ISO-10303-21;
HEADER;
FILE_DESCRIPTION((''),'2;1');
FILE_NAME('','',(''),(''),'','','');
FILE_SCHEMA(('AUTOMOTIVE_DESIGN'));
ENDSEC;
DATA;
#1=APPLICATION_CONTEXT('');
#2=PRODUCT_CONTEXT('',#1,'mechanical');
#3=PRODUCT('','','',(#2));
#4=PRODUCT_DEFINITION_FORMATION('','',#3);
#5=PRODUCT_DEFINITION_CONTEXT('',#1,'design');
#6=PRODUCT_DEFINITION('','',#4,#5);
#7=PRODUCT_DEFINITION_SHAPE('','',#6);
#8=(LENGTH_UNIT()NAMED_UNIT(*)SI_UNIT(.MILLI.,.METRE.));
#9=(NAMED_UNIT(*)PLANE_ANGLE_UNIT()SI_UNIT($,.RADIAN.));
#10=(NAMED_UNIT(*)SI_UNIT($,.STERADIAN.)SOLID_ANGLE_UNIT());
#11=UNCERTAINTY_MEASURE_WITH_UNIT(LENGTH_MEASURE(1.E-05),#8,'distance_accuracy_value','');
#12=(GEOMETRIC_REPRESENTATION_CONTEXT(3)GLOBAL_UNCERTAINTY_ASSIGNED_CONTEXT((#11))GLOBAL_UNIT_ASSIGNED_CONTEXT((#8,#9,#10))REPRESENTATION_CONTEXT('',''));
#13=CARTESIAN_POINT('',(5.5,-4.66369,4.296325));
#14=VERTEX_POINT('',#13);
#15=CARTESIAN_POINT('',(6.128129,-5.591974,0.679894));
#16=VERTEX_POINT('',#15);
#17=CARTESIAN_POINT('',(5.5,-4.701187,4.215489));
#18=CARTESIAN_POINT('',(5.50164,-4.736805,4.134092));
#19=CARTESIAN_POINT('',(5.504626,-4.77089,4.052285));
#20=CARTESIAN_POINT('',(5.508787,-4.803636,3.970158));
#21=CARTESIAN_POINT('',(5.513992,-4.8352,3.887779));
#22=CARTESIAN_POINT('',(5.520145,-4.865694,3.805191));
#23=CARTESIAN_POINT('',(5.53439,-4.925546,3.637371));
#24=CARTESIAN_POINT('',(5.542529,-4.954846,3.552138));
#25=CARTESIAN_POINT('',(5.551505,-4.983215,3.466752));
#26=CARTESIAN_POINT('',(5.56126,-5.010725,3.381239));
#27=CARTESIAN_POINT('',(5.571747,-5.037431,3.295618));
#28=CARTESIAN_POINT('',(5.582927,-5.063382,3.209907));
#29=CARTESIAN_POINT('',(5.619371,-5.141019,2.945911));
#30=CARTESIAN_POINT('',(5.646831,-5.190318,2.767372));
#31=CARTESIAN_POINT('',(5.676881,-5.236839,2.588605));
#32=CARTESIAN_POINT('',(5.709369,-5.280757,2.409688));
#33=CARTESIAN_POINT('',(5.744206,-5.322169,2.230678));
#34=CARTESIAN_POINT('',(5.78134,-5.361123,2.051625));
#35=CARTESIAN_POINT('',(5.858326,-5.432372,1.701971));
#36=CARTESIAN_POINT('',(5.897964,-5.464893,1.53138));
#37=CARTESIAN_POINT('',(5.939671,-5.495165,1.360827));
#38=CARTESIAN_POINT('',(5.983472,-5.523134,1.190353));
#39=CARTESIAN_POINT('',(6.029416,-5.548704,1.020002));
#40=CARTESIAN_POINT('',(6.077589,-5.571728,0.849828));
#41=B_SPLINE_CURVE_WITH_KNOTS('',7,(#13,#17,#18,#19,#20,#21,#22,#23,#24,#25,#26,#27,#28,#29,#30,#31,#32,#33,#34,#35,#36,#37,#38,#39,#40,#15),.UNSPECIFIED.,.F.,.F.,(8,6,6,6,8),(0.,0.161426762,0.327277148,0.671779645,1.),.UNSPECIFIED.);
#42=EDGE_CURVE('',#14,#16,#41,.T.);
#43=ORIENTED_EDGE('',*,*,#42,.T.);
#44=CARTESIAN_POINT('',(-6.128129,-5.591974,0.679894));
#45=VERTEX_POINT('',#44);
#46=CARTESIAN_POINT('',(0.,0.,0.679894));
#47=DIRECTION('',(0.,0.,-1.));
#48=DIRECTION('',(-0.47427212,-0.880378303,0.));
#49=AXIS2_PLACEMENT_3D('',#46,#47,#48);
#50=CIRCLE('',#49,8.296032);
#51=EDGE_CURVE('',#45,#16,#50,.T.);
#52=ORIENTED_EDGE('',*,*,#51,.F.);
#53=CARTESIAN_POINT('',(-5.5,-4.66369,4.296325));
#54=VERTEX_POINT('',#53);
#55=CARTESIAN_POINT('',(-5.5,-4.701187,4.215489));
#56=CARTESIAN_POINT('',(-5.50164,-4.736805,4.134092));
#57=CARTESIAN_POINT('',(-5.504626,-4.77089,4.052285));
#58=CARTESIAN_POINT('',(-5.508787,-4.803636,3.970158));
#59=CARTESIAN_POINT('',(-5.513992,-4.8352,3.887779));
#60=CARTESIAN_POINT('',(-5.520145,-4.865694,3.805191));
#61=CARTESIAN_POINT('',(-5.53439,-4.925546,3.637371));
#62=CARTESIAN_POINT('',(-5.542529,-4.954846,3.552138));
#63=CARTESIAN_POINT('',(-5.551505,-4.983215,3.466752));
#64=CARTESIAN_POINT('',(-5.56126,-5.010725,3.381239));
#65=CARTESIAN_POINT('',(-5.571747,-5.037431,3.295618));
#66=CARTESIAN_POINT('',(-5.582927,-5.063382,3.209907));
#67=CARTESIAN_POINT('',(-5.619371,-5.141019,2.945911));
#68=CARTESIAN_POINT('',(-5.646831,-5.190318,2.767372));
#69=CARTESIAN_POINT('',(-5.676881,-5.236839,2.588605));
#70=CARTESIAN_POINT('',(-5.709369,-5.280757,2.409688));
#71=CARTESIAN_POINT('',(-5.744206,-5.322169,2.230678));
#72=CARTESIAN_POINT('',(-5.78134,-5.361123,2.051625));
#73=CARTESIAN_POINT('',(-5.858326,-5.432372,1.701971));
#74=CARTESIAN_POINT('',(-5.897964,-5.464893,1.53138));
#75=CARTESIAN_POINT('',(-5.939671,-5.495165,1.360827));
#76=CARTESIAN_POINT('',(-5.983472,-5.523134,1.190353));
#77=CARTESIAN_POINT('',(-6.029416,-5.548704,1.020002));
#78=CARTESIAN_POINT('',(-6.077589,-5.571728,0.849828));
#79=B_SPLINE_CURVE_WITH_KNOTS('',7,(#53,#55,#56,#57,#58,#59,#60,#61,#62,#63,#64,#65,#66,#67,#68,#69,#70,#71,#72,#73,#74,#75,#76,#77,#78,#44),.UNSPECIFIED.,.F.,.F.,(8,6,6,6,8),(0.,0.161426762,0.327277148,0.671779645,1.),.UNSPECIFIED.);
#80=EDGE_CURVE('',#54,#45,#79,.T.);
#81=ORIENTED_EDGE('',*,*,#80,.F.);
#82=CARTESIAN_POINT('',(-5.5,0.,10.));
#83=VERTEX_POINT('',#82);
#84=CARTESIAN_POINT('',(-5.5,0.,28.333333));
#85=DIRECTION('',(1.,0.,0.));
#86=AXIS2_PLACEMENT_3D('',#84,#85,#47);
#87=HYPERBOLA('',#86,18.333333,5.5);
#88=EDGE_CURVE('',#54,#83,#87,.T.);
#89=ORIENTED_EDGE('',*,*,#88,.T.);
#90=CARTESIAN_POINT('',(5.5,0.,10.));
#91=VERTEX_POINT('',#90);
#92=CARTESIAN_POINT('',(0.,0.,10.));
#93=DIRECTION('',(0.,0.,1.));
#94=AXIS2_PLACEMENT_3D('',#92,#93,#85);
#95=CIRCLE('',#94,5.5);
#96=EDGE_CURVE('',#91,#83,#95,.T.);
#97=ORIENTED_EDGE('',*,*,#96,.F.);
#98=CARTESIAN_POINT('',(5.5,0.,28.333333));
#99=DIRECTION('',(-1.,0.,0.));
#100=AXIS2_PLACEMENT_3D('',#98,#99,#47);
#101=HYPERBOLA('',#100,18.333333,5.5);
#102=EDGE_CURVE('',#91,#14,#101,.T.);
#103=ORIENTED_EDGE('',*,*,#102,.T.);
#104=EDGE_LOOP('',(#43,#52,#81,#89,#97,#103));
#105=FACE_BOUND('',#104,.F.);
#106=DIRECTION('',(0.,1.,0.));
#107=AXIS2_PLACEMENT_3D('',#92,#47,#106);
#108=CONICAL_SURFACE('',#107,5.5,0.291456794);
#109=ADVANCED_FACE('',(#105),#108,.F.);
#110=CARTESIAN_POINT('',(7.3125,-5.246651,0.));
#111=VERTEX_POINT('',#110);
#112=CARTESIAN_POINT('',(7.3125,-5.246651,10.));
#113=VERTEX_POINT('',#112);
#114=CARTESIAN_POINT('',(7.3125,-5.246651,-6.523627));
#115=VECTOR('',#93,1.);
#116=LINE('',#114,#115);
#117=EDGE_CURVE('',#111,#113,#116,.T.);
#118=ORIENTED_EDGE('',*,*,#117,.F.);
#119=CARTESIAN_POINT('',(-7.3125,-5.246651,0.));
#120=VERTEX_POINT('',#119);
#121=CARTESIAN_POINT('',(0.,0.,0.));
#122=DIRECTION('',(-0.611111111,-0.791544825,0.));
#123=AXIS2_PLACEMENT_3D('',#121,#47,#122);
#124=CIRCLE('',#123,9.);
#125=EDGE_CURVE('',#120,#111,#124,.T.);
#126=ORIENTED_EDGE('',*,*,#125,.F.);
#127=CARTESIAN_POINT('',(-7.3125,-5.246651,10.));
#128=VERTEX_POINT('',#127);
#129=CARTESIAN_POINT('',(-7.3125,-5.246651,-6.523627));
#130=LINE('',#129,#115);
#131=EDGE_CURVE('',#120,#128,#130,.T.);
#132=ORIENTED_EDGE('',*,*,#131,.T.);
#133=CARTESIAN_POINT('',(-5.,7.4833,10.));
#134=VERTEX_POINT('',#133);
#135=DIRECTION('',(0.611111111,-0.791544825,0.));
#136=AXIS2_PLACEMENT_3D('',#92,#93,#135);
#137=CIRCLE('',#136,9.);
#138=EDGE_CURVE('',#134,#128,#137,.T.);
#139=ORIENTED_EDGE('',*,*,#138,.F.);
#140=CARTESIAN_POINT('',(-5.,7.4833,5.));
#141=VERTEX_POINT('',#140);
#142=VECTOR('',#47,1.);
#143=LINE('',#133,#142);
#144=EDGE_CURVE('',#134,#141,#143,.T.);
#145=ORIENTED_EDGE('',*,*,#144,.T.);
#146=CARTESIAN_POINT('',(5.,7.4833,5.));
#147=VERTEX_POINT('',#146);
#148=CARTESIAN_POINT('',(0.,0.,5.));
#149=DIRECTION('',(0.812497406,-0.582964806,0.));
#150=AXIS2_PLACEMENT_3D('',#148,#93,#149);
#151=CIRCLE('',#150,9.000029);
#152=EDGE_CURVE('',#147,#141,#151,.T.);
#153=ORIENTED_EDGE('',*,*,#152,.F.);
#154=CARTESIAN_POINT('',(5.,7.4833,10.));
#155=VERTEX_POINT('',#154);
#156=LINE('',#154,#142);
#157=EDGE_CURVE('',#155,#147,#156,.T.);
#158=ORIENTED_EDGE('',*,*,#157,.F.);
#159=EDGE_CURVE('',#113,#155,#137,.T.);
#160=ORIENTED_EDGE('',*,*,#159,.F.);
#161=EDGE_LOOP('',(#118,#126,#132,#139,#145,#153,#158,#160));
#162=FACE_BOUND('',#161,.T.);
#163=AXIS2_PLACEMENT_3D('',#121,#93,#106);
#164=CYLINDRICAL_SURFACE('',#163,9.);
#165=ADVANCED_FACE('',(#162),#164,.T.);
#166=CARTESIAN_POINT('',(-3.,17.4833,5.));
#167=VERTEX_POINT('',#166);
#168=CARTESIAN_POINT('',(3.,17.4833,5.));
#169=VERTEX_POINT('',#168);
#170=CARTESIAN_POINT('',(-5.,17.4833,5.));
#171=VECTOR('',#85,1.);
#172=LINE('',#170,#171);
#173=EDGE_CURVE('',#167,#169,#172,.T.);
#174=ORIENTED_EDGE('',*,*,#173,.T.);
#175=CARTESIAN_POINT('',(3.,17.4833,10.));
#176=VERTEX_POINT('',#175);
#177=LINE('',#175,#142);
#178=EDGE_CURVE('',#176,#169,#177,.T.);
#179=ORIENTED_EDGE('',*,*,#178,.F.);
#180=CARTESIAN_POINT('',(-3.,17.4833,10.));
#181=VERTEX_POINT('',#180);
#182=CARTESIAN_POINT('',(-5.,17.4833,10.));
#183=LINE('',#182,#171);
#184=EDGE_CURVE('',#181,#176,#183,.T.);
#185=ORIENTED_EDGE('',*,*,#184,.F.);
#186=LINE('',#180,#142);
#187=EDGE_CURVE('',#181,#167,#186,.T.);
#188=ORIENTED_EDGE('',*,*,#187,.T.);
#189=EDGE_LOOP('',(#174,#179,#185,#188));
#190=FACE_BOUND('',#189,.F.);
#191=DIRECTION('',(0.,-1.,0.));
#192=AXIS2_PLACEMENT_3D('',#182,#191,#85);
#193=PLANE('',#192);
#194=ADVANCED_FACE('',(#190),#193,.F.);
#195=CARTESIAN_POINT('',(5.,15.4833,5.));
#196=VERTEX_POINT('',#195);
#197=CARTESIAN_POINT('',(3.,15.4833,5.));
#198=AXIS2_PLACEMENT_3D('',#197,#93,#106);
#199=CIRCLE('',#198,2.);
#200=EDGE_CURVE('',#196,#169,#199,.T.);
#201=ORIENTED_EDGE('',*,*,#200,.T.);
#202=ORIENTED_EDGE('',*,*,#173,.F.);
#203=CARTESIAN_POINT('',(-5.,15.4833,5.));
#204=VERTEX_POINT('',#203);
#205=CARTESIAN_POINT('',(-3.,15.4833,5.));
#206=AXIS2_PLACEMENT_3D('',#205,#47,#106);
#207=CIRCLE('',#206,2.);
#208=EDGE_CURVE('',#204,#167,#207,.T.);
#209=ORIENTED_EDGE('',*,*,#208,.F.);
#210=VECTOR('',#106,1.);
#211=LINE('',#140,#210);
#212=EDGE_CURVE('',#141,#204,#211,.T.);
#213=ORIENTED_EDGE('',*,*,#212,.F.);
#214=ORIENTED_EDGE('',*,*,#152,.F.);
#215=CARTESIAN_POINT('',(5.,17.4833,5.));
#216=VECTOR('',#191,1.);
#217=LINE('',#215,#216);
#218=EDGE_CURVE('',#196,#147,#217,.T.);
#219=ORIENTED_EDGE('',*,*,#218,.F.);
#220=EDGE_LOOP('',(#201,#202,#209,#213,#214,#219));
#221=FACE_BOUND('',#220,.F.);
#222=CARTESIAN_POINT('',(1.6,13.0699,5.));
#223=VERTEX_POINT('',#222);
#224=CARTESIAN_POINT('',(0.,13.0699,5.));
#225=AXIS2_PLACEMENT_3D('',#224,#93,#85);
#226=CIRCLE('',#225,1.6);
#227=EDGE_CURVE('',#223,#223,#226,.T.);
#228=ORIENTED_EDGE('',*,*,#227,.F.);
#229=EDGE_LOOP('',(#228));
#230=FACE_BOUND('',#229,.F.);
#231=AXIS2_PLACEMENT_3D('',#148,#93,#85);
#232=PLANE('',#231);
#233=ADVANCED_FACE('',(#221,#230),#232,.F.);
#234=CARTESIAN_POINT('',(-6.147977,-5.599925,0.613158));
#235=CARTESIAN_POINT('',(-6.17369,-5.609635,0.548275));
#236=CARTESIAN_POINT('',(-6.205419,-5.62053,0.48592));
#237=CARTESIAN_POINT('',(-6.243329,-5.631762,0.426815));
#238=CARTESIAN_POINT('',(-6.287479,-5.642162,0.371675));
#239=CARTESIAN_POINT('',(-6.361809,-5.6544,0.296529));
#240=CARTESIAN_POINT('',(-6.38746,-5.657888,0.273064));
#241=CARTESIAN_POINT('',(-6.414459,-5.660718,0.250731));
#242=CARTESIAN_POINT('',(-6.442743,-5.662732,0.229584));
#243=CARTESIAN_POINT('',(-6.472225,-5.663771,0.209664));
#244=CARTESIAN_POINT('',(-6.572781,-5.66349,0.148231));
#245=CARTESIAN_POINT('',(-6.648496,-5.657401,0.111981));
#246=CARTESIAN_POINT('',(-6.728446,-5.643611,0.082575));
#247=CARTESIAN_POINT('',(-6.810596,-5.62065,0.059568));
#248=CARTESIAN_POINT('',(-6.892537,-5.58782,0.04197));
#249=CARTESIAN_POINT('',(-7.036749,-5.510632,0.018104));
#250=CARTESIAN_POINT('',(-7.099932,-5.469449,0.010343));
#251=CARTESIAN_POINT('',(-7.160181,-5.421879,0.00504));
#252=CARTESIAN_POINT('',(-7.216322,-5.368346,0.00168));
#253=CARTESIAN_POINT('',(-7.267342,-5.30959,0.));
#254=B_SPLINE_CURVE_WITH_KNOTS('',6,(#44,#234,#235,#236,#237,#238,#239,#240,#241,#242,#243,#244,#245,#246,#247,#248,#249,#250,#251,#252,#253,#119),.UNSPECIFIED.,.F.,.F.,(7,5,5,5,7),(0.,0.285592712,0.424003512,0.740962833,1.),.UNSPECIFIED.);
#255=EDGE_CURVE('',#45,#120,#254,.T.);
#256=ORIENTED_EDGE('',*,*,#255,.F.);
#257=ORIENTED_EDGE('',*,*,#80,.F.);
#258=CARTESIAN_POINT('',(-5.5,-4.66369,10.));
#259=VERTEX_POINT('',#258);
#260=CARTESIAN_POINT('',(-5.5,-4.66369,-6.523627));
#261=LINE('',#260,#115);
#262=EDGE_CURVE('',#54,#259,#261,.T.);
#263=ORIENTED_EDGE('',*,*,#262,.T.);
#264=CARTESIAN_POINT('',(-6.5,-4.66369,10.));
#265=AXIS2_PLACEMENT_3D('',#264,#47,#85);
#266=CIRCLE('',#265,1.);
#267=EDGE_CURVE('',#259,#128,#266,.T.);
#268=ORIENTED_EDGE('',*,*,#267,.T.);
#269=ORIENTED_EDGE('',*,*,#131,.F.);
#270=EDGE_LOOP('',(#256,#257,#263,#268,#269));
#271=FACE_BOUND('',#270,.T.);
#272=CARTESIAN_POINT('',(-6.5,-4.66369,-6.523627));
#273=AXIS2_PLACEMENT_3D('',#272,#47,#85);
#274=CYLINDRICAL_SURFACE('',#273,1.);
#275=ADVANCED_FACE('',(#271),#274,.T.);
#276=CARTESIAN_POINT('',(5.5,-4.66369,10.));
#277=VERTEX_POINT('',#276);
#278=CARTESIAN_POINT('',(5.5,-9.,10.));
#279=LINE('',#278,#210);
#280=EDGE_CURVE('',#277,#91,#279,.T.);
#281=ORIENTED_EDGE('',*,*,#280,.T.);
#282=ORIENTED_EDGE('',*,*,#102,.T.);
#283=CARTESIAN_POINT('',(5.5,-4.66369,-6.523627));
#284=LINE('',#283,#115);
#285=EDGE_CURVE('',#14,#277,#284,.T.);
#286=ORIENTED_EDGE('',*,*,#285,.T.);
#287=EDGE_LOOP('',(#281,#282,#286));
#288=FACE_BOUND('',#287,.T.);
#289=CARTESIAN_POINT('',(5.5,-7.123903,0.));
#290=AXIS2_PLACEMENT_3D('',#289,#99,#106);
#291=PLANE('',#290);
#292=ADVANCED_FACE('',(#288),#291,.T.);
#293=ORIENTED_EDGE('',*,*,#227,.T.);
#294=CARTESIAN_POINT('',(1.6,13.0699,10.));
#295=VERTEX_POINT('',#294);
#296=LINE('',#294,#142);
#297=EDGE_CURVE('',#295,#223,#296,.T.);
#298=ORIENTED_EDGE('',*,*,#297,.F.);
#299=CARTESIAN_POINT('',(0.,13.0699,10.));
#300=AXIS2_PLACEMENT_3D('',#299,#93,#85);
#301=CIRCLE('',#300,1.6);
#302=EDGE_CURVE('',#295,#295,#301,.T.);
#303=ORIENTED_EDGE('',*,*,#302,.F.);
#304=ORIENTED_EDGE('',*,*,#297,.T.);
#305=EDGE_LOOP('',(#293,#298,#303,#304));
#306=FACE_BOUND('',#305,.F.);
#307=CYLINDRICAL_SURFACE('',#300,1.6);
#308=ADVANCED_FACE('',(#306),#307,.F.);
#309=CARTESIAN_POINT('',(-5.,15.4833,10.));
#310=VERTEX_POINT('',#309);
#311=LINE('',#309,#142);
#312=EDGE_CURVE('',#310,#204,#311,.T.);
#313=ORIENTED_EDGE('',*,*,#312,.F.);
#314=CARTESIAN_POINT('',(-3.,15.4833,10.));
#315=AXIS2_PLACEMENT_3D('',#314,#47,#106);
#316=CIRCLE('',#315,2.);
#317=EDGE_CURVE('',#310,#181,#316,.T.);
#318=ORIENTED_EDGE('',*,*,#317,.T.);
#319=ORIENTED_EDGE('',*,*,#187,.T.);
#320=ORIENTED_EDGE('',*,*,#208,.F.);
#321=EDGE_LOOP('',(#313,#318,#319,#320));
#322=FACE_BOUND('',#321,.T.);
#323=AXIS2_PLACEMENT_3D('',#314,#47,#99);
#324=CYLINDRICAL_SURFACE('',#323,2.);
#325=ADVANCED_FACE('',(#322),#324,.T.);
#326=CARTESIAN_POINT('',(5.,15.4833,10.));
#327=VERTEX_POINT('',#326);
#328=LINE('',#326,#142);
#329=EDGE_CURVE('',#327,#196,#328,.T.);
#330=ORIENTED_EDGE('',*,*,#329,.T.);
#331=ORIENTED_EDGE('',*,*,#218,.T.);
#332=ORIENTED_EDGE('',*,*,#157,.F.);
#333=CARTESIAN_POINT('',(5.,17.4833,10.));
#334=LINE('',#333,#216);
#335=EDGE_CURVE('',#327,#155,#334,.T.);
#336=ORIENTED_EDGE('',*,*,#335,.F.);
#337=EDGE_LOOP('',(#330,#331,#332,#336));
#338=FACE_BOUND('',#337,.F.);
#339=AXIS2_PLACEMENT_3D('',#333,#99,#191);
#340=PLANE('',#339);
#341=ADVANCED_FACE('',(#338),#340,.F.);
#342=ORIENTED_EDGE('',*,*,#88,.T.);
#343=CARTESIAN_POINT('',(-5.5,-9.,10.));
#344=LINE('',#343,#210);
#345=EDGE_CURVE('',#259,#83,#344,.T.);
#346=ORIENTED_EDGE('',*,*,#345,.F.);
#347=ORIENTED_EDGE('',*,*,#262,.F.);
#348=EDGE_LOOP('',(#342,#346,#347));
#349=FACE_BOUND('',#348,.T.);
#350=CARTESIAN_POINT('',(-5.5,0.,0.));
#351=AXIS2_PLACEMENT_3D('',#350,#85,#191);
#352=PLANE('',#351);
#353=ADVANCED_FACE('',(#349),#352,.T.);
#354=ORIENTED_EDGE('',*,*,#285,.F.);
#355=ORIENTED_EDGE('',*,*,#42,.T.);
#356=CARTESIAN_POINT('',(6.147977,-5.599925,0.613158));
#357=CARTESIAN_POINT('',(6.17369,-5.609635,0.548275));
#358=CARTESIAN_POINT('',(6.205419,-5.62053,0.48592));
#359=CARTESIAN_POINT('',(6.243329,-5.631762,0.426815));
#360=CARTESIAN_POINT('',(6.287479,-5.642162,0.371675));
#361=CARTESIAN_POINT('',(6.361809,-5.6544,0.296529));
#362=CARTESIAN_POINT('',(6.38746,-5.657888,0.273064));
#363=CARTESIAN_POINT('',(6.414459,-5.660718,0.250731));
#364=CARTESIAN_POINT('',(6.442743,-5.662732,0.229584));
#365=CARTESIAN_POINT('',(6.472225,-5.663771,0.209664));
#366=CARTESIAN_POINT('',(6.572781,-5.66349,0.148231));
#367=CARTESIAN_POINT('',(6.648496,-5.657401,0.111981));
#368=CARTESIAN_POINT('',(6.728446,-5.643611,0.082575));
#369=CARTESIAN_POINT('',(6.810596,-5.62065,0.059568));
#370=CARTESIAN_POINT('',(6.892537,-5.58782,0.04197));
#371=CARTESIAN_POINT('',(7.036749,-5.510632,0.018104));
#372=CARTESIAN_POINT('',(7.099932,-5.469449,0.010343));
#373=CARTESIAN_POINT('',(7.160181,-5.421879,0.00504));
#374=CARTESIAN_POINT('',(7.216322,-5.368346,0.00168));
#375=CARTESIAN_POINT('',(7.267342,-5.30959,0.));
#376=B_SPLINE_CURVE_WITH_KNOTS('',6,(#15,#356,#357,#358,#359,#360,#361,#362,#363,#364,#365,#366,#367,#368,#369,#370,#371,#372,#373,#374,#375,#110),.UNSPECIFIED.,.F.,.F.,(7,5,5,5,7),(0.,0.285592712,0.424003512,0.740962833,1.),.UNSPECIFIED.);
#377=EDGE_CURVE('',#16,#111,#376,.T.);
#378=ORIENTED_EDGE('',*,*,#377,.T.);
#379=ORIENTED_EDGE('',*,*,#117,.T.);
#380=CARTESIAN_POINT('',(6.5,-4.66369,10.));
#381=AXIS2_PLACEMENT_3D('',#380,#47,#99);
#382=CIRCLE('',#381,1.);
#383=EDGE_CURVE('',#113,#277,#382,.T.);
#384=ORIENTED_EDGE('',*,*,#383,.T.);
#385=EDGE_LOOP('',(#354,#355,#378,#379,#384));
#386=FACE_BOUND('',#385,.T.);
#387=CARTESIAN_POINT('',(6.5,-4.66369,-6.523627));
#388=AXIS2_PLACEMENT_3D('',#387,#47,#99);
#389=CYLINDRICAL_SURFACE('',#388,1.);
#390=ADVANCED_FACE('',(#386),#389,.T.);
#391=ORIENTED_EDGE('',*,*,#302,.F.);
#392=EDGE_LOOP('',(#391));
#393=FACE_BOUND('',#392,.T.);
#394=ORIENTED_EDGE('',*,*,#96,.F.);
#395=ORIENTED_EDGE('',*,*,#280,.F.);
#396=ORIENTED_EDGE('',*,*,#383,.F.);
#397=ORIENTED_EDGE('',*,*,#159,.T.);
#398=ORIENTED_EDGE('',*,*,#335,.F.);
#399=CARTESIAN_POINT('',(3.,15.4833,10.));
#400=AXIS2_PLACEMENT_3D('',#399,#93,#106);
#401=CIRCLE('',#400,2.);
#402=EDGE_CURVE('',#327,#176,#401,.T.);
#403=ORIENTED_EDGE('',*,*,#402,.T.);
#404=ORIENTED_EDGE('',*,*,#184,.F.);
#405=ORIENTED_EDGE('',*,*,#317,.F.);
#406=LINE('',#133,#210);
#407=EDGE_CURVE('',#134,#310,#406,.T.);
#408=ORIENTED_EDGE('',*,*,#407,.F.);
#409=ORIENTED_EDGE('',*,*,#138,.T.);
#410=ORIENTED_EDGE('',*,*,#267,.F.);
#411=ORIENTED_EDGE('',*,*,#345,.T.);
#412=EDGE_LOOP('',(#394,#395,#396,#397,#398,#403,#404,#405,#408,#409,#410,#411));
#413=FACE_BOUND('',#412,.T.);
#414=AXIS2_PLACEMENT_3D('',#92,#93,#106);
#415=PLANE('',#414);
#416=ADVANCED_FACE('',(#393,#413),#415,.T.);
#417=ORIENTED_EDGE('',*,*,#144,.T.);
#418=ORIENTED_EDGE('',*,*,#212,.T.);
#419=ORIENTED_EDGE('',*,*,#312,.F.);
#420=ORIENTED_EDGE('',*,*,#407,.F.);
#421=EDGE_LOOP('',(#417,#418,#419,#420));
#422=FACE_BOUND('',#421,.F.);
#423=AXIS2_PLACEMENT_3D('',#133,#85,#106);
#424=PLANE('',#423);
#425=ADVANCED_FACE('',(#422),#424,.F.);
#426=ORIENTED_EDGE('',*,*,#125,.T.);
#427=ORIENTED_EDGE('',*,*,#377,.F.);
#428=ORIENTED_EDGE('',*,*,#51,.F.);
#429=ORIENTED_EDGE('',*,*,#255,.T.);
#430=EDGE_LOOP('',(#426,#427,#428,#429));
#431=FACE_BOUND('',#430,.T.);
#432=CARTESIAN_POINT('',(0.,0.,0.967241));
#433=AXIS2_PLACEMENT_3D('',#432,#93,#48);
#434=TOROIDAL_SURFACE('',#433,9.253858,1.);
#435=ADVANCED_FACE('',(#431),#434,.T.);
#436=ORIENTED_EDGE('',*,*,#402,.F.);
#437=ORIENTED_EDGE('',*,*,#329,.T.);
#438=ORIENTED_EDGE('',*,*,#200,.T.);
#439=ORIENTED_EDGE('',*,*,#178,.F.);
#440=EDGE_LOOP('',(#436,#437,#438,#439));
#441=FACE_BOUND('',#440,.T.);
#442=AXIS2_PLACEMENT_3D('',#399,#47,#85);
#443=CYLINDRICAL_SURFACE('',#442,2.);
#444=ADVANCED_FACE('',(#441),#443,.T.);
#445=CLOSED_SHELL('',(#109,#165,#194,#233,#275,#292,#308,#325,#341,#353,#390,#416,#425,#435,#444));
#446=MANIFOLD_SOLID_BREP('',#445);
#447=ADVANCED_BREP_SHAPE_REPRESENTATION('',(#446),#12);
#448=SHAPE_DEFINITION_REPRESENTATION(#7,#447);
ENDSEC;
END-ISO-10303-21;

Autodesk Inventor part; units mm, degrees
ref_plane "YZ Plane" through (0, 0, 0) normal (1, 0, 0) x (0, 1, 0)
ref_plane "XZ Plane" through (0, 0, 0) normal (0, 1, 0) x (-1, 0, 0)
ref_plane "XY Plane" through (0, 0, 0) normal (0, 0, 1) x (1, 0, 0)
sketch "Sketch1" plane through (0, 0, 0) normal (1, 0, 0) x (0, 1, 0)
  line L0 (5.5, 10) -> (5.5, 10)
  line L1 (8.5, 0) -> (9, 0)
  line L2 (9, 0) -> (9, 10)
  line L3 (9, 10) -> (5.5, 10)
  line L4 (0, 0) -> (0, 4.238)
  line L5 (5.5, 10) -> (8.5, 0)
  dimension "d11" = 0
  dimension "d13" = 9
  dimension "d14" = 5.5
  dimension "d15" = 10
  dimension "d26" = 8.5
revolve "Revolution1" add sketch "Sketch1" angle 360 about axis through (0, 0, 0) along (0, 0, 1)
sketch "Sketch3" plane through (0, 0, 0) normal (0, 0, -1) x (-1, 0, 0)
  line L0 (-5.5, 0) -> (5.5, 0)
  line L1 (5.5, 0) -> (5.5, -9)
  line L2 (5.5, -9) -> (-5.5, -9)
  line L3 (-5.5, -9) -> (-5.5, 0)
  circle A0 centre (0, 0) radius 9 projected
  circle A1 centre (0, 0) radius 5.5 projected
extrude "Extrusion1" cut sketch "Sketch3" against normal blind 10 contours A1 L1 A0 L3 | L0 A1 | A0 L2 L3 | L1 L2 A0 picked at (4.148, -6.5999) picked at (-1.2514, -2.3608)
fillet "Fillet1" radius 1 5 edges at (0, 8.5, 0) (5.5, -6.8023, 0) (-5.5, -6.8023, 0) (-5.5, -7.1239, 5) (5.5, -7.1239, 5)
sketch "Sketch4" plane through (0, 0, 10) normal (0, 0, 1) x (1, 0, 0)
  line L0 (-5, 17.4833) -> (5, 17.4833)
  line L1 (5, 17.4833) -> (5, 7.4833)
  line L2 (5, 7.4833) -> (-5, 7.4833)
  line L3 (-5, 7.4833) -> (-5, 17.4833)
  circle A0 centre (0, 13.0699) radius 1.6
  arc A1 (7.3125, -5.2467) -> (-7.3125, -5.2467) centre (0, 0) ccw projected
  dimension "d19" = 10
  dimension "d21" = 10
  dimension "d22" = 3.2
  dimension "d29" = 4.4135
extrude "Extrusion2" add sketch "Sketch4" against normal blind 5 contours L0 L1 A1 L3
fillet "Fillet2" radius 2 2 edges at (5, 17.4833, 7.5) (-5, 17.4833, 7.5)
properties part number "brush rack"
